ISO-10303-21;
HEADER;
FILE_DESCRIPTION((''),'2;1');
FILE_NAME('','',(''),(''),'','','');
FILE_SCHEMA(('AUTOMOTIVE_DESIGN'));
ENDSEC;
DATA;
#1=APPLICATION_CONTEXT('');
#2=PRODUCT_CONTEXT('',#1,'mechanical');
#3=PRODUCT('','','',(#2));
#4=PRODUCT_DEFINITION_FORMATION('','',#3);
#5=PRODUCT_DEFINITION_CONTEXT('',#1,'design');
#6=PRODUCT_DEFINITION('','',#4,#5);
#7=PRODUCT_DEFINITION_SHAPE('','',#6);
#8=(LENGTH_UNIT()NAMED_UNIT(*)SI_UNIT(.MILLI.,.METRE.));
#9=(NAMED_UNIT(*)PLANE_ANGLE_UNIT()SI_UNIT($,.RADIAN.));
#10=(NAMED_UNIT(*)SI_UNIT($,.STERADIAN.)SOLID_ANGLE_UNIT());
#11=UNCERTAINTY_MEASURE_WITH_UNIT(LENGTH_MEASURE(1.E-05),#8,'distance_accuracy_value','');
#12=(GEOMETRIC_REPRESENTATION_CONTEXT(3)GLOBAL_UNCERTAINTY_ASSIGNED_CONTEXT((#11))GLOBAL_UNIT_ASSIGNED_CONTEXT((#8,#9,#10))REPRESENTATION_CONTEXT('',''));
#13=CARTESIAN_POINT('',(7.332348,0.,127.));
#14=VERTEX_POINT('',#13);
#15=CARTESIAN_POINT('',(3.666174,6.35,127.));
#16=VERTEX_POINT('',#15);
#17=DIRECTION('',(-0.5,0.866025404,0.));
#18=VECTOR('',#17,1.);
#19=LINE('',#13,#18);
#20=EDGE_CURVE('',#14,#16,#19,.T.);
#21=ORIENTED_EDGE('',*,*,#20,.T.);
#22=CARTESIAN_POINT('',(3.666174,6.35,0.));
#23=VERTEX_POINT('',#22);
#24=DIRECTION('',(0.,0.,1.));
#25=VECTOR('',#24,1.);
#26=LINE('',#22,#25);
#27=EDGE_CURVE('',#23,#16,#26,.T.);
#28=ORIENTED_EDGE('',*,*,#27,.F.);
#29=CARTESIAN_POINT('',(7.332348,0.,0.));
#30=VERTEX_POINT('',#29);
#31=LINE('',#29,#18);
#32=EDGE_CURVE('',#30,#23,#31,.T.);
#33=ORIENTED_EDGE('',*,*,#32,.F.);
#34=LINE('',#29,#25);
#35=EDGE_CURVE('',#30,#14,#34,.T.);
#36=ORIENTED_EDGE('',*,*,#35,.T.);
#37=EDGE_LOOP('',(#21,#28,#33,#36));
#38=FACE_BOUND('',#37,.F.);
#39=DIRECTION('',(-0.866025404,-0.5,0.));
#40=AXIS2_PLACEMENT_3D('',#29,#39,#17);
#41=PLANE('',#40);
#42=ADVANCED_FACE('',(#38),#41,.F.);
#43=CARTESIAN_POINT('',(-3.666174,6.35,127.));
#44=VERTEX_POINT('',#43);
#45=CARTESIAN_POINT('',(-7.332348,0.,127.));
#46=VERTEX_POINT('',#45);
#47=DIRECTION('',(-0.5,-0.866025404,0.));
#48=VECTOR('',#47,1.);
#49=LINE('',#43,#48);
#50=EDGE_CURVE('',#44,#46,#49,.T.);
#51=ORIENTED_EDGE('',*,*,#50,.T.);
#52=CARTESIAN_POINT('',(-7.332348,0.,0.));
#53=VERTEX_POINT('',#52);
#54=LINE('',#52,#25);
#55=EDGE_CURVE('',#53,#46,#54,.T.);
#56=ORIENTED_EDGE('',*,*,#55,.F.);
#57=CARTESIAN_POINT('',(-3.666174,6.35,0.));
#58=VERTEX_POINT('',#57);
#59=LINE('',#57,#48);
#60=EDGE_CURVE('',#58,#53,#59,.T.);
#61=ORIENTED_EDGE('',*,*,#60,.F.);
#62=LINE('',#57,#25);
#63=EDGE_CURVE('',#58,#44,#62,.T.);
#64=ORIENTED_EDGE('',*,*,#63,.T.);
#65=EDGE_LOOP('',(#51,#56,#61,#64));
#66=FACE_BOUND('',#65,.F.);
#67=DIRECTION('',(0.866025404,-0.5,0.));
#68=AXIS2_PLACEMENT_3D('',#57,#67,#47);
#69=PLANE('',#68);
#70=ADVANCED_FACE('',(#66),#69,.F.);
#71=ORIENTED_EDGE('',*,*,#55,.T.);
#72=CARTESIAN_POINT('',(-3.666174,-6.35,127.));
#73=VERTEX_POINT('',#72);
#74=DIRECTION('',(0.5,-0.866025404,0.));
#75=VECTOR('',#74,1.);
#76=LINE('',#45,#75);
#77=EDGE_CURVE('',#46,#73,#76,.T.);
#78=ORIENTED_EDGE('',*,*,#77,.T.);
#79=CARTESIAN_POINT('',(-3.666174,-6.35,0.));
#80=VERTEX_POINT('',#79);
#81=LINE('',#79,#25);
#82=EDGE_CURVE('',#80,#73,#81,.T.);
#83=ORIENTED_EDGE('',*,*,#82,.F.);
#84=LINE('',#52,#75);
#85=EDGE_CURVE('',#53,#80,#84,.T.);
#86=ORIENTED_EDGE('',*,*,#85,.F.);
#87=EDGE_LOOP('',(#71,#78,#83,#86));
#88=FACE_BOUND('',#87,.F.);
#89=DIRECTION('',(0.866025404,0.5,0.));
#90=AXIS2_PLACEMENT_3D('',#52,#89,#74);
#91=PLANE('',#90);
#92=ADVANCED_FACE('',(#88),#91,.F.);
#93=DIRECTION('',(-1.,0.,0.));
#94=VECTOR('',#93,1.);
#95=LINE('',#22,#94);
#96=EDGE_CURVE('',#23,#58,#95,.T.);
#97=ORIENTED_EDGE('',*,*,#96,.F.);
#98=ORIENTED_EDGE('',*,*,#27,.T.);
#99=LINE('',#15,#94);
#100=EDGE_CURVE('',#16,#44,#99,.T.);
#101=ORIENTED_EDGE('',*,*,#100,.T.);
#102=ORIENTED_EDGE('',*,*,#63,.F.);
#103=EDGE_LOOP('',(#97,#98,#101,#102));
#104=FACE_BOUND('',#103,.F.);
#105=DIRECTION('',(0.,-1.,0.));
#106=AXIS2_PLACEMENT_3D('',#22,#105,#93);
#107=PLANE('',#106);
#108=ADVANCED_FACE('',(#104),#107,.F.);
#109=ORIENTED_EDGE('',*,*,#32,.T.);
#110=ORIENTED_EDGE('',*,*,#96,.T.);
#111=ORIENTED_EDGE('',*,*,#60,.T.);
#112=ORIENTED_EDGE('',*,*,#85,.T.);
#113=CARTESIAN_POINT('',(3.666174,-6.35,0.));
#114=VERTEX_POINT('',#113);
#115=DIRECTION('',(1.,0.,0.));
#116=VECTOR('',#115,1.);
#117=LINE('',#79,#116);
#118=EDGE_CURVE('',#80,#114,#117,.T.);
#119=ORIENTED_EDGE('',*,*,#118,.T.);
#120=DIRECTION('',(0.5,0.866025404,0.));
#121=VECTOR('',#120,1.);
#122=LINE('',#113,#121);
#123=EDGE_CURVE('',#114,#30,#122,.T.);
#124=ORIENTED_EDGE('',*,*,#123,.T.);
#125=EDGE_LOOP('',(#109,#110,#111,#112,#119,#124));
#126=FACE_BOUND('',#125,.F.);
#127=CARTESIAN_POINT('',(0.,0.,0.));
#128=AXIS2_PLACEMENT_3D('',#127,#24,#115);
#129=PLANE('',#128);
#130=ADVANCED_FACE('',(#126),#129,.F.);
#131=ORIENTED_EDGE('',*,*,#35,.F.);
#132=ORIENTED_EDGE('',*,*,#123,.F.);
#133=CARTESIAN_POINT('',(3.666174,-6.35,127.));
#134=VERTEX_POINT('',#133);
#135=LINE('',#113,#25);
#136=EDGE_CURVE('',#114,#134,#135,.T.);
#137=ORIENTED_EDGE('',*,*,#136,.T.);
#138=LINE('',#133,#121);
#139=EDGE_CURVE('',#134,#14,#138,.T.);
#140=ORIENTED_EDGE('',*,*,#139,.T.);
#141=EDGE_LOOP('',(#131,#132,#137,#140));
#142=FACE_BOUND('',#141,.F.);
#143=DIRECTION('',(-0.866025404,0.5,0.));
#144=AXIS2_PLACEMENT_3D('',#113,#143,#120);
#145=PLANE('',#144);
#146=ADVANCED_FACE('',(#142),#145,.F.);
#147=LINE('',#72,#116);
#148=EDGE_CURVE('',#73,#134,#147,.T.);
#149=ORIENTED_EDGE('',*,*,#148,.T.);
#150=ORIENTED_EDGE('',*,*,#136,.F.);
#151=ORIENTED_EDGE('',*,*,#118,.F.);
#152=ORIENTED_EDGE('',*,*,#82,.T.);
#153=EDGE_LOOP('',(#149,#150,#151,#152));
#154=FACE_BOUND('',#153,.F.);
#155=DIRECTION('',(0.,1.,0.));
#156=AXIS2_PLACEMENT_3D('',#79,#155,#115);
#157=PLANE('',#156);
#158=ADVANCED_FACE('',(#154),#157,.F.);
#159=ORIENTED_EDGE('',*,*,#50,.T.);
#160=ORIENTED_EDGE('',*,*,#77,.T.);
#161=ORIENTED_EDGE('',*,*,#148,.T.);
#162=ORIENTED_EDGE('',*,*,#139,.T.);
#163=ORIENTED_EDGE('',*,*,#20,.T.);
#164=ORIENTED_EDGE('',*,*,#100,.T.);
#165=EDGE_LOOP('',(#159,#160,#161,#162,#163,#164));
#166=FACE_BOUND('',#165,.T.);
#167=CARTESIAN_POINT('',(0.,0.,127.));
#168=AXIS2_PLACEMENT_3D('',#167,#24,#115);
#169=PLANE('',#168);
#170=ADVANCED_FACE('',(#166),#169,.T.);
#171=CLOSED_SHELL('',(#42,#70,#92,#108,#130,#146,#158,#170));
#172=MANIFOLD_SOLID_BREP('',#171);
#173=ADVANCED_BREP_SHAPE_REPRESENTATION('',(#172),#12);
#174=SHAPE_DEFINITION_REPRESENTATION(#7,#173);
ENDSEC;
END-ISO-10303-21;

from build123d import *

# Parameters (mm, degrees)
F2_DEPTH = 127


# Not quite as in the source:
# - a variable given as a bare number and used for a length is read in inches; the dataset says mm whatever the document's units were


with BuildPart() as f2:
    # F1 (on Top) → F2 (new body)
    with BuildSketch(Plane.XY):
        Polygon((3.6661742094, 6.35), (-3.6661742094, 6.35), (-7.3323484187, 0), (-3.6661742094, -6.35), (3.6661742094, -6.35), (7.3323484187, 0), align=None)
    extrude(amount=F2_DEPTH)


solid = f2.part
